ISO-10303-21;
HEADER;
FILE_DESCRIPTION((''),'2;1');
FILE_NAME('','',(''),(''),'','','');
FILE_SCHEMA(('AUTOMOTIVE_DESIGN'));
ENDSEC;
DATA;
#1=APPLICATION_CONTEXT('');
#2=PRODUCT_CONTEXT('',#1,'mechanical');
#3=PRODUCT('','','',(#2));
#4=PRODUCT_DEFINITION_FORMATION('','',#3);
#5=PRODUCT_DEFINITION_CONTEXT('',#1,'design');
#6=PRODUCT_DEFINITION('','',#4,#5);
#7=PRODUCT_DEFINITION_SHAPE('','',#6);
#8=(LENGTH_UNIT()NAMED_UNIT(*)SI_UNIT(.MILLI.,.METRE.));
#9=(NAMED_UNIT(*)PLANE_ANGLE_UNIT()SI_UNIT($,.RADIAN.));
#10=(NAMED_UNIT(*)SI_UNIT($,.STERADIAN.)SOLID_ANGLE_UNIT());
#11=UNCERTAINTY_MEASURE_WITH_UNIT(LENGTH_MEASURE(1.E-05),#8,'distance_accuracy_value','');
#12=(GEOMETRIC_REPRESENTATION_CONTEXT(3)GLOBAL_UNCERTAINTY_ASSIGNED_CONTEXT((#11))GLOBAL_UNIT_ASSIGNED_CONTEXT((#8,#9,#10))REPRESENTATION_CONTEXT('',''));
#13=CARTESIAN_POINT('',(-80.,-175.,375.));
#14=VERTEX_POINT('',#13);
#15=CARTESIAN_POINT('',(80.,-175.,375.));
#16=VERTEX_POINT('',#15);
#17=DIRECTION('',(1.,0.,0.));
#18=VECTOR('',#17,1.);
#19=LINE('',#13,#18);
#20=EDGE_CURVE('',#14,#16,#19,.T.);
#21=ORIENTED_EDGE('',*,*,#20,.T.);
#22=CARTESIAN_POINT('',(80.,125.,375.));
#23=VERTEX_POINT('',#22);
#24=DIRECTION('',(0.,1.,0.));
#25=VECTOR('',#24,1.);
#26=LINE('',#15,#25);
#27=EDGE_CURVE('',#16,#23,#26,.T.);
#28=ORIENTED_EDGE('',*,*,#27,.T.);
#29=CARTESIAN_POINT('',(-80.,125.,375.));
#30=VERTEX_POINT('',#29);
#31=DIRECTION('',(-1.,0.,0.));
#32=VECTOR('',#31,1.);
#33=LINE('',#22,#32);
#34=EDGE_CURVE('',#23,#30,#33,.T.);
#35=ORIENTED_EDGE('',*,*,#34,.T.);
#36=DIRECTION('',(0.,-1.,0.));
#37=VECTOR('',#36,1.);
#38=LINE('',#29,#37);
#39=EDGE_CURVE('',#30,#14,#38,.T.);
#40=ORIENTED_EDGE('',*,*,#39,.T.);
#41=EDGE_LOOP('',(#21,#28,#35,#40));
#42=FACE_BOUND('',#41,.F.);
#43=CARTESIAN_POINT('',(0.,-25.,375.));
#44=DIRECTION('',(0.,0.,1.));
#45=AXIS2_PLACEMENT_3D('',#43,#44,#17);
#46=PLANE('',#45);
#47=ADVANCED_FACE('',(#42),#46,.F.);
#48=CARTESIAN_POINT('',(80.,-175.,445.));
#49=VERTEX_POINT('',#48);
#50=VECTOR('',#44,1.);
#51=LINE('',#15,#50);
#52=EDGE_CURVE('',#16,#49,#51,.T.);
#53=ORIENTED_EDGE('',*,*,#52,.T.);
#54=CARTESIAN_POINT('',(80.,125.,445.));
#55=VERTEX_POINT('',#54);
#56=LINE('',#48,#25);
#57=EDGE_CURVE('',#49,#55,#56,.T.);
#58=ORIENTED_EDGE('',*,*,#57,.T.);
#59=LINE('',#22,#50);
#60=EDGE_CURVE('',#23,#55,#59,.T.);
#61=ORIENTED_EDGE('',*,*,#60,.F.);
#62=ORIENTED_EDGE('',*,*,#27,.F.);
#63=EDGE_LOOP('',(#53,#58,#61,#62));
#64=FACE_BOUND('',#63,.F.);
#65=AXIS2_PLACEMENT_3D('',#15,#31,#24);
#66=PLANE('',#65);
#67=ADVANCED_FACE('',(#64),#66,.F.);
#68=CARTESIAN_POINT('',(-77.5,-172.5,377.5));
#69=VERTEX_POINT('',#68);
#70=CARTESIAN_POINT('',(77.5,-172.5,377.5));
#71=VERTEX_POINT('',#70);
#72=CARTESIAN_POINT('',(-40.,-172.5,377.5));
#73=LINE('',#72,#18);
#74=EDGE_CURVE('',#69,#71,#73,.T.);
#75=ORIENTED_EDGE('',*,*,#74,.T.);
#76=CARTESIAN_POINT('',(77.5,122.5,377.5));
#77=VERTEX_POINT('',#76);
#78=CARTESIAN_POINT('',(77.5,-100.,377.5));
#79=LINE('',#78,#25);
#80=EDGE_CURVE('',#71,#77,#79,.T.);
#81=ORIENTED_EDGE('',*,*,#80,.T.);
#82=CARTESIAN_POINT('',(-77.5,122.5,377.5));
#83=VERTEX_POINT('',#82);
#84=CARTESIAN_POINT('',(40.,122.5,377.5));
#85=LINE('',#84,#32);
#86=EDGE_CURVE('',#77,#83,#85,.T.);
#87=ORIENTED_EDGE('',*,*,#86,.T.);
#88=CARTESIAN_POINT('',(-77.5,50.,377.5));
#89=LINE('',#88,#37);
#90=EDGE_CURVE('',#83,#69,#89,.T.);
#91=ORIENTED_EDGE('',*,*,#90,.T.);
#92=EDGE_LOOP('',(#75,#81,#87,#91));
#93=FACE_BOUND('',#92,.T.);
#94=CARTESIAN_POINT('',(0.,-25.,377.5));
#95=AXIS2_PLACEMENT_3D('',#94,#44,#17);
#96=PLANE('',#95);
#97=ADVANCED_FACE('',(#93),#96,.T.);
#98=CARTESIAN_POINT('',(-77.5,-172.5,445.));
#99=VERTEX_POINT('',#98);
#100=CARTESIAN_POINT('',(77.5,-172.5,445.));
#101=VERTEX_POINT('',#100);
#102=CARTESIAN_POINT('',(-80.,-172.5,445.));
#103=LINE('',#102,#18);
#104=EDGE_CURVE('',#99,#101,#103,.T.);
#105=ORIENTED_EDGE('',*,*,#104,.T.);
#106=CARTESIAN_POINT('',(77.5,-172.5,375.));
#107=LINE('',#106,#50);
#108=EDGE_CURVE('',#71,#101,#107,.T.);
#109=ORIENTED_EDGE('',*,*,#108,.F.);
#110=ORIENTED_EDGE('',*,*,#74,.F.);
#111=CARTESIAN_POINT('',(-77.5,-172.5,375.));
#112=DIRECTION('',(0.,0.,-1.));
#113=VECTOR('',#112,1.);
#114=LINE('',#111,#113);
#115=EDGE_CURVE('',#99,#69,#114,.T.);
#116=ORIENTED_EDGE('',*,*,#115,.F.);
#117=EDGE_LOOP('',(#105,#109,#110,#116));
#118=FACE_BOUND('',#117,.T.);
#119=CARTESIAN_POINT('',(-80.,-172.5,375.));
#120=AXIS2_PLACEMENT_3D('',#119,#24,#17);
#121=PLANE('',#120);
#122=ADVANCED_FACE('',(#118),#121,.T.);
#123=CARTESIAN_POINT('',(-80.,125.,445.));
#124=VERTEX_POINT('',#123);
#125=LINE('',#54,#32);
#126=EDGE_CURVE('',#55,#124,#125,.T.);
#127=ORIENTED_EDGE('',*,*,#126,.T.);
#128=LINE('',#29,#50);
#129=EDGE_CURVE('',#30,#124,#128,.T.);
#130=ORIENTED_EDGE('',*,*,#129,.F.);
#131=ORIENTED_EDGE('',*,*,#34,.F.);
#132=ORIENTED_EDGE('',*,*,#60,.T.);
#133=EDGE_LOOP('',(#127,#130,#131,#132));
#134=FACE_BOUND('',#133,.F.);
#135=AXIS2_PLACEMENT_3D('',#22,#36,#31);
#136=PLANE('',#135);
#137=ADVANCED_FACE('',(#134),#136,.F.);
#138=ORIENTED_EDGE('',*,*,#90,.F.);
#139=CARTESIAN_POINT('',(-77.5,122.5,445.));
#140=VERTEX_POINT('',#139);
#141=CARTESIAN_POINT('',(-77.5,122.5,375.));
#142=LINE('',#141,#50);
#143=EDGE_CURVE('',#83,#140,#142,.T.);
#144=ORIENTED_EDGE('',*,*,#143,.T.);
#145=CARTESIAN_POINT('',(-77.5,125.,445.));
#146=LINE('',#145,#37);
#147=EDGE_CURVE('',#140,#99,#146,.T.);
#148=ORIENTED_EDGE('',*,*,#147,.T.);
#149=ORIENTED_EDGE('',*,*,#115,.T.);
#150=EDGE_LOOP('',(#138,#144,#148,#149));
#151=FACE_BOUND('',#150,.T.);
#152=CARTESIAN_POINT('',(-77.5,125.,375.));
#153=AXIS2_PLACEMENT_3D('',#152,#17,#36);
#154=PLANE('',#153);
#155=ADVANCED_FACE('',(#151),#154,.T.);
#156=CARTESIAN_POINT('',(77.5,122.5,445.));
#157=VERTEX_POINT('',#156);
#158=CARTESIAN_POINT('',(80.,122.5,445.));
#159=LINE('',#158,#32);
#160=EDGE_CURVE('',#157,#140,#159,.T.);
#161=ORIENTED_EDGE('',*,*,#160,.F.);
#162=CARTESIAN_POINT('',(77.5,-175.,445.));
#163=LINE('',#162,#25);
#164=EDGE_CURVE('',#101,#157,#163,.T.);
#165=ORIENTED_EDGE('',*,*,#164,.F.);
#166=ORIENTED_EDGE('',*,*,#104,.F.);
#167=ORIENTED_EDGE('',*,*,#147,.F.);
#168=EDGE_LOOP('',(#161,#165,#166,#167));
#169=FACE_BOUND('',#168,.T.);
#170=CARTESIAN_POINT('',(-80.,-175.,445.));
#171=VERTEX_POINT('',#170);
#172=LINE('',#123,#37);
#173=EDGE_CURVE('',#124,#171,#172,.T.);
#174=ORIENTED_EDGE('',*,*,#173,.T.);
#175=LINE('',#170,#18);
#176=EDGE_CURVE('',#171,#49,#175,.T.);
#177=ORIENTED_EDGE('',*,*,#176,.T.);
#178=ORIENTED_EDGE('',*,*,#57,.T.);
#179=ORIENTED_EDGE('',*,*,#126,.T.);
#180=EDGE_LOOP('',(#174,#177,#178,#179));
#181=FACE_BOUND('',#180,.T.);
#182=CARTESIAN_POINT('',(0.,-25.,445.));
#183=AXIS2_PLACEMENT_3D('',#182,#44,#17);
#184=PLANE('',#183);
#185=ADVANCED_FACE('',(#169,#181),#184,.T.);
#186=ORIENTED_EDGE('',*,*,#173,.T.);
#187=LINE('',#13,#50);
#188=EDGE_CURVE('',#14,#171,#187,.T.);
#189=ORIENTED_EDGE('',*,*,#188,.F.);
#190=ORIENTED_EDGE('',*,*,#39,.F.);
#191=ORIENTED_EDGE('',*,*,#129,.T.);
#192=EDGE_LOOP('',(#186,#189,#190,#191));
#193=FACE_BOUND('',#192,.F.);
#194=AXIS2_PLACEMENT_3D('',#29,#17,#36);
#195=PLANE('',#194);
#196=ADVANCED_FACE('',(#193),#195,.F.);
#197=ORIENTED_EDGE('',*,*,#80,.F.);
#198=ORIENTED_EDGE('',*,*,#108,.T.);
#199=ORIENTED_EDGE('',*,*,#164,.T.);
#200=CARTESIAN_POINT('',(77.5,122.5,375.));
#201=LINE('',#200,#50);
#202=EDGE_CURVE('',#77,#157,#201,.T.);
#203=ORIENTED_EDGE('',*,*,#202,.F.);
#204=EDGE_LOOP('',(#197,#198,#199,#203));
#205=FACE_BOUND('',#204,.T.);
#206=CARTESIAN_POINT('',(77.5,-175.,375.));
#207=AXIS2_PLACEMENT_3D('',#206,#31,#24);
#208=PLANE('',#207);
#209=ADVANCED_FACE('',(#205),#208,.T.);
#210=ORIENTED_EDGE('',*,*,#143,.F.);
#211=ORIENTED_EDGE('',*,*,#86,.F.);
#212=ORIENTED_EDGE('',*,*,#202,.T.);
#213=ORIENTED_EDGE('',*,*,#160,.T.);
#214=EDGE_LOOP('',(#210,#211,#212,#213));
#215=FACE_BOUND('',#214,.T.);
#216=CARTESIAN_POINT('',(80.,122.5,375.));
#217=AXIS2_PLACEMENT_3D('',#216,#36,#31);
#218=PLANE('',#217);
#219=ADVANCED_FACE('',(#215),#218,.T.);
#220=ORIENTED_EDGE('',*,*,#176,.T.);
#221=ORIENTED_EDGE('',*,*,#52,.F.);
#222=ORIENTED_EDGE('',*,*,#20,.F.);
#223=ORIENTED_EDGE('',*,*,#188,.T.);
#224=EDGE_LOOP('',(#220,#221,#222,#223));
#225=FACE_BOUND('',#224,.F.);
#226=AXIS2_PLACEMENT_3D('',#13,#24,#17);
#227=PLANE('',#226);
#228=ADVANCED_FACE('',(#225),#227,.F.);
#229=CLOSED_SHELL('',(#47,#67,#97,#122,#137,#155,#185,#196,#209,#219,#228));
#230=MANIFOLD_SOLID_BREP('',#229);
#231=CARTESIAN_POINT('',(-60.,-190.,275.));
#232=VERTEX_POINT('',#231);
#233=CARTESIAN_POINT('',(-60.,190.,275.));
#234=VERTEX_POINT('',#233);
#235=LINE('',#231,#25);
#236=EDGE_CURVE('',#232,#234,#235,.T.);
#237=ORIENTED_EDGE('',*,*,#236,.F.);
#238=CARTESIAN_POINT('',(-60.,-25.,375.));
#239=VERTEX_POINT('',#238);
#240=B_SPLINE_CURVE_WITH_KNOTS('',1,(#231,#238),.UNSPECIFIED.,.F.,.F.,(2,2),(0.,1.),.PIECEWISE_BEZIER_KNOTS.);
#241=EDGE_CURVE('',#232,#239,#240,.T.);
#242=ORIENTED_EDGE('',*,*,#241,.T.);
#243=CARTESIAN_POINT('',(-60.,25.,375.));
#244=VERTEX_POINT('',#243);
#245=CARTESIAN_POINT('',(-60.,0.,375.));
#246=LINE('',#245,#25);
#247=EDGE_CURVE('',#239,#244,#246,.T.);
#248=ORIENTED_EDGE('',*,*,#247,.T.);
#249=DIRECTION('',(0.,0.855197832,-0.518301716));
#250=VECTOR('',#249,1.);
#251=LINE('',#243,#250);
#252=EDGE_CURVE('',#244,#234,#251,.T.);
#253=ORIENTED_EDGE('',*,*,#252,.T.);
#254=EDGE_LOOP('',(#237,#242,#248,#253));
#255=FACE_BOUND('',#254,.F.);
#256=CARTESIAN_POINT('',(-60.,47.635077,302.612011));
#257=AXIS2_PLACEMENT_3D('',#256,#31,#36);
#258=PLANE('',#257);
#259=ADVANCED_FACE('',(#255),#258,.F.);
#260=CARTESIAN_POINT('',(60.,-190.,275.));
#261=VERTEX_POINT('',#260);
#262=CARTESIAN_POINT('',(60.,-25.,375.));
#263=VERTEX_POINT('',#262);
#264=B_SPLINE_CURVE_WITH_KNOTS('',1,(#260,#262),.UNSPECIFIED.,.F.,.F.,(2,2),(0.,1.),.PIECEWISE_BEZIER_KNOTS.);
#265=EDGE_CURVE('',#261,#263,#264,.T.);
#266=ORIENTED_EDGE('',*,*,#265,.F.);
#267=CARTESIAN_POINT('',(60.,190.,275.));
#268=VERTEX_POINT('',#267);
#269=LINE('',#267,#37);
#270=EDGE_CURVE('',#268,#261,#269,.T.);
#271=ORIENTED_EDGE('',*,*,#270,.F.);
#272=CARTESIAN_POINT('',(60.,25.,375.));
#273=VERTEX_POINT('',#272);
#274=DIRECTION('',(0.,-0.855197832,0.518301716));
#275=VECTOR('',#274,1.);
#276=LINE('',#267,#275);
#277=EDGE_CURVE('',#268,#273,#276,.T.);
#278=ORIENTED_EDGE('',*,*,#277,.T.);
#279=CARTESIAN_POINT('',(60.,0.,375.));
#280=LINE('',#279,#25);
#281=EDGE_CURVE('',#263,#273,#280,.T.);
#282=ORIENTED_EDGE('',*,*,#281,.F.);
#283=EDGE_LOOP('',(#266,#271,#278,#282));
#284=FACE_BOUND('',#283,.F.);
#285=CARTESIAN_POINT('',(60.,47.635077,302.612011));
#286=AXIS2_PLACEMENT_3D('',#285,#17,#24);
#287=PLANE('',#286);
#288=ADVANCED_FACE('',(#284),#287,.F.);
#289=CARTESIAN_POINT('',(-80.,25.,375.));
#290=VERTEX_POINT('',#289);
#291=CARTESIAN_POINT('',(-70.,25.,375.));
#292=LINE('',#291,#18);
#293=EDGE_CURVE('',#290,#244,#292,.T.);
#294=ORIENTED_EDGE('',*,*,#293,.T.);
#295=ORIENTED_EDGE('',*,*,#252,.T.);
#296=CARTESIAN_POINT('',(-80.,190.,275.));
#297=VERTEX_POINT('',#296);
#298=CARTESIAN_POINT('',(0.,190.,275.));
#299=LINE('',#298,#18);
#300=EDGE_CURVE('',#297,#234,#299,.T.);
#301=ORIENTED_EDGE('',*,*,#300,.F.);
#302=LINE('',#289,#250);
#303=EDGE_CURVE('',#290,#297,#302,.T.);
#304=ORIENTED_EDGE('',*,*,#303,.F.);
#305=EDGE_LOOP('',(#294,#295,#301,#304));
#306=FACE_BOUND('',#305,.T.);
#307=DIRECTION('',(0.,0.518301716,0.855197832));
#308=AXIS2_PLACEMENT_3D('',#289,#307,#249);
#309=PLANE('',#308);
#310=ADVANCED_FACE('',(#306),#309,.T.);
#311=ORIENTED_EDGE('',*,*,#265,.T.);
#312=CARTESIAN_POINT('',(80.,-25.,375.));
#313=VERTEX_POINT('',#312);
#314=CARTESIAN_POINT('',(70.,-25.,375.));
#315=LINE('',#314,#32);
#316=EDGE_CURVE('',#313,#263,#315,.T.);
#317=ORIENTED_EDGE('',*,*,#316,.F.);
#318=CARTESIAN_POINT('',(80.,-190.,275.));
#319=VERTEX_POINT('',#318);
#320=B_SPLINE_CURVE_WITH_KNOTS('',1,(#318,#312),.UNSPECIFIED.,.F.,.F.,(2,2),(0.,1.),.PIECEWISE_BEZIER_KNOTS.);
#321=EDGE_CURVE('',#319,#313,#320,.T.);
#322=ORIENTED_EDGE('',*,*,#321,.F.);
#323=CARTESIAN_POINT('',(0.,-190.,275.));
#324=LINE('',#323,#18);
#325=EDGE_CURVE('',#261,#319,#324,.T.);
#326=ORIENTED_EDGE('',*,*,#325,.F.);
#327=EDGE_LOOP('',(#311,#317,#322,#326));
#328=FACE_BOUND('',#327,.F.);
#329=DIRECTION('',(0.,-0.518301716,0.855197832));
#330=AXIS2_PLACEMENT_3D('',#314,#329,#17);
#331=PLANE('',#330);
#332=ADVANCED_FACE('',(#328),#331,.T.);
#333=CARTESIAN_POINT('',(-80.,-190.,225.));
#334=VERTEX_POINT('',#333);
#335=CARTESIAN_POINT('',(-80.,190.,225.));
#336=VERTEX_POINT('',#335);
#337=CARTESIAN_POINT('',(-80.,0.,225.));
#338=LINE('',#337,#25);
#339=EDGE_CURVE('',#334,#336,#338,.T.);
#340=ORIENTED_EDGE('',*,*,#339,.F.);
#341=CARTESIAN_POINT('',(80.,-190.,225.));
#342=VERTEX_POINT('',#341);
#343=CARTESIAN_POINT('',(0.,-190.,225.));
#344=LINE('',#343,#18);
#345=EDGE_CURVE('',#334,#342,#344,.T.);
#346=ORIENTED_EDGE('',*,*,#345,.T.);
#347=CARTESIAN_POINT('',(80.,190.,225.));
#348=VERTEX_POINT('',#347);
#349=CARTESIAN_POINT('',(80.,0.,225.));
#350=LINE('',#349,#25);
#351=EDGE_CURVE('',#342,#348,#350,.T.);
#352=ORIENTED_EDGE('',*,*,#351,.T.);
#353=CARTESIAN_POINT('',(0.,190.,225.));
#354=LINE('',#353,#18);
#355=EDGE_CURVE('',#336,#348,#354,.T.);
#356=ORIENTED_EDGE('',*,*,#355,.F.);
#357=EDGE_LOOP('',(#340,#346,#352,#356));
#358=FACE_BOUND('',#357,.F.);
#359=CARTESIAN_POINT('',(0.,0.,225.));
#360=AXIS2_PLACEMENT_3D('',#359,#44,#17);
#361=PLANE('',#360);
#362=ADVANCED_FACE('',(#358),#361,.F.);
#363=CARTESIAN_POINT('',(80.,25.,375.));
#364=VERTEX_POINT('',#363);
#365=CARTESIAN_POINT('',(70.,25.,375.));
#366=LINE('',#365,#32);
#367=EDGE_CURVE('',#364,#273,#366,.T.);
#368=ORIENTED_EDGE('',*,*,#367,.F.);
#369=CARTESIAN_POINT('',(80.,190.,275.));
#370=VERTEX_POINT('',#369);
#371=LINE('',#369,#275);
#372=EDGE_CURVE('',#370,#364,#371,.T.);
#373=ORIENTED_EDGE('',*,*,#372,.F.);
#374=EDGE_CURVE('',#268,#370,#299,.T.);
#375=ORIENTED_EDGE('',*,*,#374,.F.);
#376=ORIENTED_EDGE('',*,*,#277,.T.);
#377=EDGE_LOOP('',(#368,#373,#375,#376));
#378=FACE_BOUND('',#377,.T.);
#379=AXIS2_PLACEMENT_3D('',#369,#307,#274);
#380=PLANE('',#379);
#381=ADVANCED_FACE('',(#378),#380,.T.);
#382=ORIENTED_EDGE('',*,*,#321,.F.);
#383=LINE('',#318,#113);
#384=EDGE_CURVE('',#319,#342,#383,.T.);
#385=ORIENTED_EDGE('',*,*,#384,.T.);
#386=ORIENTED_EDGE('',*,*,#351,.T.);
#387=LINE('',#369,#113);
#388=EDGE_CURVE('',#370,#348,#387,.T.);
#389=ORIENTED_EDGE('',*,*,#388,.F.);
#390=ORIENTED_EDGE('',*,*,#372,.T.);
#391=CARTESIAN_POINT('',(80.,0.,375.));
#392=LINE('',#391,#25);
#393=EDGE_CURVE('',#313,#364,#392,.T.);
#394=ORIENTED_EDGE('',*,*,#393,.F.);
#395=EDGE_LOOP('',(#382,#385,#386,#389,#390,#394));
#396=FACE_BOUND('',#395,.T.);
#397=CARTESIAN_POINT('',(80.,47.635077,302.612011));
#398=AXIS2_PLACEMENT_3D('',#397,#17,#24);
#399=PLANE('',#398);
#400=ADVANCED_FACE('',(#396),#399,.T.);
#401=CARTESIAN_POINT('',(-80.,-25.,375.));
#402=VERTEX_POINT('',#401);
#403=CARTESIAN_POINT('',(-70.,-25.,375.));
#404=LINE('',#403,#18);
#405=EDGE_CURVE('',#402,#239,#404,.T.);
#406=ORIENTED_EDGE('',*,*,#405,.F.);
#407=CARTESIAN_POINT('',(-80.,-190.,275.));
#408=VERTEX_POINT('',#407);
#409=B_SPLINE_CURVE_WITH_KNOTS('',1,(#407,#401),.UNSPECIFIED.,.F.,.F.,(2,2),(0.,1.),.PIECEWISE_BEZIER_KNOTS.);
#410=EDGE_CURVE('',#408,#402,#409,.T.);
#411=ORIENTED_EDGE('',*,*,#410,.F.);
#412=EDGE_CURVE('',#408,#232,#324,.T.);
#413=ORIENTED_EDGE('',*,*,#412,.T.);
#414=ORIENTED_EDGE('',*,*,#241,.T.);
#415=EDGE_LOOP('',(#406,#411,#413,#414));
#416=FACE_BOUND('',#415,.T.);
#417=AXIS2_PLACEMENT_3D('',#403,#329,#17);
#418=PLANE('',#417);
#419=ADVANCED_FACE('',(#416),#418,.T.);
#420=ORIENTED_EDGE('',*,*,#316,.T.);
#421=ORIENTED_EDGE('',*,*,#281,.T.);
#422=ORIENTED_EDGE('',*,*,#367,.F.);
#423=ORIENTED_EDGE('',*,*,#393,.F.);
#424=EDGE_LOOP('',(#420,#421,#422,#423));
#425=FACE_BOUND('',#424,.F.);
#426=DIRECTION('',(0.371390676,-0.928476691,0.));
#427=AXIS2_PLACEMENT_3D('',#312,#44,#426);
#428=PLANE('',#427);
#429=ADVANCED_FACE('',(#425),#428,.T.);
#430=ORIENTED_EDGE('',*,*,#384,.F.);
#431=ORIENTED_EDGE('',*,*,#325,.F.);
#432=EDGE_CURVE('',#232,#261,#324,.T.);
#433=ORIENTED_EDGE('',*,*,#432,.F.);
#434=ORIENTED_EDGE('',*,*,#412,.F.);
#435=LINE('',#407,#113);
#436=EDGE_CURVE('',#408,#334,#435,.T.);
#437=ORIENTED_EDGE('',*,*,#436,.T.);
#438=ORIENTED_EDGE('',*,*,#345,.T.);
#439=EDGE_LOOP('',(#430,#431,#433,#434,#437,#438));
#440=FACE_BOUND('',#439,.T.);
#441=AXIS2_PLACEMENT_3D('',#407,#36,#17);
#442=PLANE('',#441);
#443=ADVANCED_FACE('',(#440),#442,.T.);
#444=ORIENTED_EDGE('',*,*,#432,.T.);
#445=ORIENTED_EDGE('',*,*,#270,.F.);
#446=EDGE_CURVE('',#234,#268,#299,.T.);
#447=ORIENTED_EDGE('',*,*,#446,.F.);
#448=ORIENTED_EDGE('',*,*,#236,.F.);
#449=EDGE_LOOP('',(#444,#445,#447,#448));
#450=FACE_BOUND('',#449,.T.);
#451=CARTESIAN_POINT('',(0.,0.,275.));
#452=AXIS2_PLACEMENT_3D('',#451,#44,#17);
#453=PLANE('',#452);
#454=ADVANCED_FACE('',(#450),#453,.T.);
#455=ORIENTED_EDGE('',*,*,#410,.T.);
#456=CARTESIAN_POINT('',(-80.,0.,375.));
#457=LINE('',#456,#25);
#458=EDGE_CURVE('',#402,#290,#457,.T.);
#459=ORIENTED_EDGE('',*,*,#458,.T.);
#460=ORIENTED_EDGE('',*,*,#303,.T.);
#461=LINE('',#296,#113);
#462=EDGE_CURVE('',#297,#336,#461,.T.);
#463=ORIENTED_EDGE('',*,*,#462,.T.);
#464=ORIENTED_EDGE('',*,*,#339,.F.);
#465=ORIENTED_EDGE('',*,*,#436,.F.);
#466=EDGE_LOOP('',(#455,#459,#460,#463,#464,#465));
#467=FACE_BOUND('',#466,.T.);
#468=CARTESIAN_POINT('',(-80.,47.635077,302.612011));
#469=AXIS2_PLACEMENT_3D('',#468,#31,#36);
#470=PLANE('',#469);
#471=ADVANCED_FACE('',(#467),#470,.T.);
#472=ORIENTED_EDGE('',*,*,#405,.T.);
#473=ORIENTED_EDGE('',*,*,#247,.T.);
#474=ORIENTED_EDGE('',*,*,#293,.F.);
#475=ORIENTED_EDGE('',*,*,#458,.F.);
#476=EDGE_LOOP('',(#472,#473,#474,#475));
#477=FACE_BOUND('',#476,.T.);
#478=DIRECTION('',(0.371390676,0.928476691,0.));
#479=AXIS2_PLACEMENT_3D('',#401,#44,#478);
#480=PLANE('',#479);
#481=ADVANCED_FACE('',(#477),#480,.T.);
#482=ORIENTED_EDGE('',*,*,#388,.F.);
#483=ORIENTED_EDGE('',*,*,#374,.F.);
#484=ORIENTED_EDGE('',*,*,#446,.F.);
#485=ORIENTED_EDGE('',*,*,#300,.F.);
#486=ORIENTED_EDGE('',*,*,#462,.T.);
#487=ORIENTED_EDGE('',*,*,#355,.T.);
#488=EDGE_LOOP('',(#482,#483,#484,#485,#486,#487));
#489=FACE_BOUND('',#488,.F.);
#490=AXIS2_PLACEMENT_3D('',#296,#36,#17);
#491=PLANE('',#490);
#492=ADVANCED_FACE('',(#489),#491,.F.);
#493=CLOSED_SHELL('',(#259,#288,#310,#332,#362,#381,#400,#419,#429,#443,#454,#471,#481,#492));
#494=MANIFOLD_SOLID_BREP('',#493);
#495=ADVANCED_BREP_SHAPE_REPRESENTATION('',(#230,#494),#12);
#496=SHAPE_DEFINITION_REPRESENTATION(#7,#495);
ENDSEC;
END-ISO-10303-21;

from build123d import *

# Parameters (mm, degrees)
F1_W      = 160
F1_H      = 380
F2_DEPTH  = 50
F3_W      = 20
F3_H      = 100
F5_W      = 20
F5_H      = 50
F10_DEPTH = 70
F11_T     = -2.5
F13_DEPTH = 20
F15_DEPTH = 20


# Not quite as in the source:
# - a feature of the source that left no trace in its solid (it failed there, or was rolled back) is left out
# - a pattern or mirror of a feature is missing from the dataset's text; its kind, count and spacing are read off the source's solid


with BuildPart() as f2:
    # F1 (on offset) → F2 (new body)
    with BuildSketch(Plane.XY.offset(275)):
        Rectangle(F1_W, F1_H)
    extrude(amount=-F2_DEPTH)

    # F3 (on face) → F7 section 0
    with BuildSketch(Plane.XY.offset(275)):
        with Locations((-70, -140)):
            Rectangle(F3_W, F3_H)
    # F5 (on offset) → F7 section 1
    with BuildSketch(Plane.XY.offset(375)):
        with Locations((-70, 0)):
            Rectangle(F5_W, F5_H)
    f7 = loft()

    # F7_copies: F7 across plane
    add(f7.mirror(Plane(origin=(0, 0, 0), x_dir=(0, 0, 1), z_dir=(1, 0, 0))))

    # F12 (on face) → F13 (join)
    with BuildSketch(Plane.YZ.offset(80)):
        Polygon((25, 375), (-90, 275), (190, 275), align=None)
    extrude(amount=-F13_DEPTH)

    # F14 (on face) → F15 (join)
    with BuildSketch(Plane(origin=(-80, 0, 0), x_dir=(0, -1, 0), z_dir=(-1, 0, 0))):
        Polygon((-190, 275), (90, 275), (-25, 375), align=None)
    extrude(amount=-F15_DEPTH)


with BuildPart() as f10:
    # F9 (on face) → F10 (new body)
    with BuildSketch(Plane.XY.offset(375)):
        Polygon((-80, -175), (80, -175), (80, 125), (-80, 125), (-80, -25), align=None)
    extrude(amount=F10_DEPTH)

    # F11
    f11_openings = [f10.faces().sort_by_distance(p)[0] for p in [
        (0, -25, 445),
    ]]
    offset(amount=F11_T, openings=f11_openings)


solid = Compound([f2.part, f10.part])
